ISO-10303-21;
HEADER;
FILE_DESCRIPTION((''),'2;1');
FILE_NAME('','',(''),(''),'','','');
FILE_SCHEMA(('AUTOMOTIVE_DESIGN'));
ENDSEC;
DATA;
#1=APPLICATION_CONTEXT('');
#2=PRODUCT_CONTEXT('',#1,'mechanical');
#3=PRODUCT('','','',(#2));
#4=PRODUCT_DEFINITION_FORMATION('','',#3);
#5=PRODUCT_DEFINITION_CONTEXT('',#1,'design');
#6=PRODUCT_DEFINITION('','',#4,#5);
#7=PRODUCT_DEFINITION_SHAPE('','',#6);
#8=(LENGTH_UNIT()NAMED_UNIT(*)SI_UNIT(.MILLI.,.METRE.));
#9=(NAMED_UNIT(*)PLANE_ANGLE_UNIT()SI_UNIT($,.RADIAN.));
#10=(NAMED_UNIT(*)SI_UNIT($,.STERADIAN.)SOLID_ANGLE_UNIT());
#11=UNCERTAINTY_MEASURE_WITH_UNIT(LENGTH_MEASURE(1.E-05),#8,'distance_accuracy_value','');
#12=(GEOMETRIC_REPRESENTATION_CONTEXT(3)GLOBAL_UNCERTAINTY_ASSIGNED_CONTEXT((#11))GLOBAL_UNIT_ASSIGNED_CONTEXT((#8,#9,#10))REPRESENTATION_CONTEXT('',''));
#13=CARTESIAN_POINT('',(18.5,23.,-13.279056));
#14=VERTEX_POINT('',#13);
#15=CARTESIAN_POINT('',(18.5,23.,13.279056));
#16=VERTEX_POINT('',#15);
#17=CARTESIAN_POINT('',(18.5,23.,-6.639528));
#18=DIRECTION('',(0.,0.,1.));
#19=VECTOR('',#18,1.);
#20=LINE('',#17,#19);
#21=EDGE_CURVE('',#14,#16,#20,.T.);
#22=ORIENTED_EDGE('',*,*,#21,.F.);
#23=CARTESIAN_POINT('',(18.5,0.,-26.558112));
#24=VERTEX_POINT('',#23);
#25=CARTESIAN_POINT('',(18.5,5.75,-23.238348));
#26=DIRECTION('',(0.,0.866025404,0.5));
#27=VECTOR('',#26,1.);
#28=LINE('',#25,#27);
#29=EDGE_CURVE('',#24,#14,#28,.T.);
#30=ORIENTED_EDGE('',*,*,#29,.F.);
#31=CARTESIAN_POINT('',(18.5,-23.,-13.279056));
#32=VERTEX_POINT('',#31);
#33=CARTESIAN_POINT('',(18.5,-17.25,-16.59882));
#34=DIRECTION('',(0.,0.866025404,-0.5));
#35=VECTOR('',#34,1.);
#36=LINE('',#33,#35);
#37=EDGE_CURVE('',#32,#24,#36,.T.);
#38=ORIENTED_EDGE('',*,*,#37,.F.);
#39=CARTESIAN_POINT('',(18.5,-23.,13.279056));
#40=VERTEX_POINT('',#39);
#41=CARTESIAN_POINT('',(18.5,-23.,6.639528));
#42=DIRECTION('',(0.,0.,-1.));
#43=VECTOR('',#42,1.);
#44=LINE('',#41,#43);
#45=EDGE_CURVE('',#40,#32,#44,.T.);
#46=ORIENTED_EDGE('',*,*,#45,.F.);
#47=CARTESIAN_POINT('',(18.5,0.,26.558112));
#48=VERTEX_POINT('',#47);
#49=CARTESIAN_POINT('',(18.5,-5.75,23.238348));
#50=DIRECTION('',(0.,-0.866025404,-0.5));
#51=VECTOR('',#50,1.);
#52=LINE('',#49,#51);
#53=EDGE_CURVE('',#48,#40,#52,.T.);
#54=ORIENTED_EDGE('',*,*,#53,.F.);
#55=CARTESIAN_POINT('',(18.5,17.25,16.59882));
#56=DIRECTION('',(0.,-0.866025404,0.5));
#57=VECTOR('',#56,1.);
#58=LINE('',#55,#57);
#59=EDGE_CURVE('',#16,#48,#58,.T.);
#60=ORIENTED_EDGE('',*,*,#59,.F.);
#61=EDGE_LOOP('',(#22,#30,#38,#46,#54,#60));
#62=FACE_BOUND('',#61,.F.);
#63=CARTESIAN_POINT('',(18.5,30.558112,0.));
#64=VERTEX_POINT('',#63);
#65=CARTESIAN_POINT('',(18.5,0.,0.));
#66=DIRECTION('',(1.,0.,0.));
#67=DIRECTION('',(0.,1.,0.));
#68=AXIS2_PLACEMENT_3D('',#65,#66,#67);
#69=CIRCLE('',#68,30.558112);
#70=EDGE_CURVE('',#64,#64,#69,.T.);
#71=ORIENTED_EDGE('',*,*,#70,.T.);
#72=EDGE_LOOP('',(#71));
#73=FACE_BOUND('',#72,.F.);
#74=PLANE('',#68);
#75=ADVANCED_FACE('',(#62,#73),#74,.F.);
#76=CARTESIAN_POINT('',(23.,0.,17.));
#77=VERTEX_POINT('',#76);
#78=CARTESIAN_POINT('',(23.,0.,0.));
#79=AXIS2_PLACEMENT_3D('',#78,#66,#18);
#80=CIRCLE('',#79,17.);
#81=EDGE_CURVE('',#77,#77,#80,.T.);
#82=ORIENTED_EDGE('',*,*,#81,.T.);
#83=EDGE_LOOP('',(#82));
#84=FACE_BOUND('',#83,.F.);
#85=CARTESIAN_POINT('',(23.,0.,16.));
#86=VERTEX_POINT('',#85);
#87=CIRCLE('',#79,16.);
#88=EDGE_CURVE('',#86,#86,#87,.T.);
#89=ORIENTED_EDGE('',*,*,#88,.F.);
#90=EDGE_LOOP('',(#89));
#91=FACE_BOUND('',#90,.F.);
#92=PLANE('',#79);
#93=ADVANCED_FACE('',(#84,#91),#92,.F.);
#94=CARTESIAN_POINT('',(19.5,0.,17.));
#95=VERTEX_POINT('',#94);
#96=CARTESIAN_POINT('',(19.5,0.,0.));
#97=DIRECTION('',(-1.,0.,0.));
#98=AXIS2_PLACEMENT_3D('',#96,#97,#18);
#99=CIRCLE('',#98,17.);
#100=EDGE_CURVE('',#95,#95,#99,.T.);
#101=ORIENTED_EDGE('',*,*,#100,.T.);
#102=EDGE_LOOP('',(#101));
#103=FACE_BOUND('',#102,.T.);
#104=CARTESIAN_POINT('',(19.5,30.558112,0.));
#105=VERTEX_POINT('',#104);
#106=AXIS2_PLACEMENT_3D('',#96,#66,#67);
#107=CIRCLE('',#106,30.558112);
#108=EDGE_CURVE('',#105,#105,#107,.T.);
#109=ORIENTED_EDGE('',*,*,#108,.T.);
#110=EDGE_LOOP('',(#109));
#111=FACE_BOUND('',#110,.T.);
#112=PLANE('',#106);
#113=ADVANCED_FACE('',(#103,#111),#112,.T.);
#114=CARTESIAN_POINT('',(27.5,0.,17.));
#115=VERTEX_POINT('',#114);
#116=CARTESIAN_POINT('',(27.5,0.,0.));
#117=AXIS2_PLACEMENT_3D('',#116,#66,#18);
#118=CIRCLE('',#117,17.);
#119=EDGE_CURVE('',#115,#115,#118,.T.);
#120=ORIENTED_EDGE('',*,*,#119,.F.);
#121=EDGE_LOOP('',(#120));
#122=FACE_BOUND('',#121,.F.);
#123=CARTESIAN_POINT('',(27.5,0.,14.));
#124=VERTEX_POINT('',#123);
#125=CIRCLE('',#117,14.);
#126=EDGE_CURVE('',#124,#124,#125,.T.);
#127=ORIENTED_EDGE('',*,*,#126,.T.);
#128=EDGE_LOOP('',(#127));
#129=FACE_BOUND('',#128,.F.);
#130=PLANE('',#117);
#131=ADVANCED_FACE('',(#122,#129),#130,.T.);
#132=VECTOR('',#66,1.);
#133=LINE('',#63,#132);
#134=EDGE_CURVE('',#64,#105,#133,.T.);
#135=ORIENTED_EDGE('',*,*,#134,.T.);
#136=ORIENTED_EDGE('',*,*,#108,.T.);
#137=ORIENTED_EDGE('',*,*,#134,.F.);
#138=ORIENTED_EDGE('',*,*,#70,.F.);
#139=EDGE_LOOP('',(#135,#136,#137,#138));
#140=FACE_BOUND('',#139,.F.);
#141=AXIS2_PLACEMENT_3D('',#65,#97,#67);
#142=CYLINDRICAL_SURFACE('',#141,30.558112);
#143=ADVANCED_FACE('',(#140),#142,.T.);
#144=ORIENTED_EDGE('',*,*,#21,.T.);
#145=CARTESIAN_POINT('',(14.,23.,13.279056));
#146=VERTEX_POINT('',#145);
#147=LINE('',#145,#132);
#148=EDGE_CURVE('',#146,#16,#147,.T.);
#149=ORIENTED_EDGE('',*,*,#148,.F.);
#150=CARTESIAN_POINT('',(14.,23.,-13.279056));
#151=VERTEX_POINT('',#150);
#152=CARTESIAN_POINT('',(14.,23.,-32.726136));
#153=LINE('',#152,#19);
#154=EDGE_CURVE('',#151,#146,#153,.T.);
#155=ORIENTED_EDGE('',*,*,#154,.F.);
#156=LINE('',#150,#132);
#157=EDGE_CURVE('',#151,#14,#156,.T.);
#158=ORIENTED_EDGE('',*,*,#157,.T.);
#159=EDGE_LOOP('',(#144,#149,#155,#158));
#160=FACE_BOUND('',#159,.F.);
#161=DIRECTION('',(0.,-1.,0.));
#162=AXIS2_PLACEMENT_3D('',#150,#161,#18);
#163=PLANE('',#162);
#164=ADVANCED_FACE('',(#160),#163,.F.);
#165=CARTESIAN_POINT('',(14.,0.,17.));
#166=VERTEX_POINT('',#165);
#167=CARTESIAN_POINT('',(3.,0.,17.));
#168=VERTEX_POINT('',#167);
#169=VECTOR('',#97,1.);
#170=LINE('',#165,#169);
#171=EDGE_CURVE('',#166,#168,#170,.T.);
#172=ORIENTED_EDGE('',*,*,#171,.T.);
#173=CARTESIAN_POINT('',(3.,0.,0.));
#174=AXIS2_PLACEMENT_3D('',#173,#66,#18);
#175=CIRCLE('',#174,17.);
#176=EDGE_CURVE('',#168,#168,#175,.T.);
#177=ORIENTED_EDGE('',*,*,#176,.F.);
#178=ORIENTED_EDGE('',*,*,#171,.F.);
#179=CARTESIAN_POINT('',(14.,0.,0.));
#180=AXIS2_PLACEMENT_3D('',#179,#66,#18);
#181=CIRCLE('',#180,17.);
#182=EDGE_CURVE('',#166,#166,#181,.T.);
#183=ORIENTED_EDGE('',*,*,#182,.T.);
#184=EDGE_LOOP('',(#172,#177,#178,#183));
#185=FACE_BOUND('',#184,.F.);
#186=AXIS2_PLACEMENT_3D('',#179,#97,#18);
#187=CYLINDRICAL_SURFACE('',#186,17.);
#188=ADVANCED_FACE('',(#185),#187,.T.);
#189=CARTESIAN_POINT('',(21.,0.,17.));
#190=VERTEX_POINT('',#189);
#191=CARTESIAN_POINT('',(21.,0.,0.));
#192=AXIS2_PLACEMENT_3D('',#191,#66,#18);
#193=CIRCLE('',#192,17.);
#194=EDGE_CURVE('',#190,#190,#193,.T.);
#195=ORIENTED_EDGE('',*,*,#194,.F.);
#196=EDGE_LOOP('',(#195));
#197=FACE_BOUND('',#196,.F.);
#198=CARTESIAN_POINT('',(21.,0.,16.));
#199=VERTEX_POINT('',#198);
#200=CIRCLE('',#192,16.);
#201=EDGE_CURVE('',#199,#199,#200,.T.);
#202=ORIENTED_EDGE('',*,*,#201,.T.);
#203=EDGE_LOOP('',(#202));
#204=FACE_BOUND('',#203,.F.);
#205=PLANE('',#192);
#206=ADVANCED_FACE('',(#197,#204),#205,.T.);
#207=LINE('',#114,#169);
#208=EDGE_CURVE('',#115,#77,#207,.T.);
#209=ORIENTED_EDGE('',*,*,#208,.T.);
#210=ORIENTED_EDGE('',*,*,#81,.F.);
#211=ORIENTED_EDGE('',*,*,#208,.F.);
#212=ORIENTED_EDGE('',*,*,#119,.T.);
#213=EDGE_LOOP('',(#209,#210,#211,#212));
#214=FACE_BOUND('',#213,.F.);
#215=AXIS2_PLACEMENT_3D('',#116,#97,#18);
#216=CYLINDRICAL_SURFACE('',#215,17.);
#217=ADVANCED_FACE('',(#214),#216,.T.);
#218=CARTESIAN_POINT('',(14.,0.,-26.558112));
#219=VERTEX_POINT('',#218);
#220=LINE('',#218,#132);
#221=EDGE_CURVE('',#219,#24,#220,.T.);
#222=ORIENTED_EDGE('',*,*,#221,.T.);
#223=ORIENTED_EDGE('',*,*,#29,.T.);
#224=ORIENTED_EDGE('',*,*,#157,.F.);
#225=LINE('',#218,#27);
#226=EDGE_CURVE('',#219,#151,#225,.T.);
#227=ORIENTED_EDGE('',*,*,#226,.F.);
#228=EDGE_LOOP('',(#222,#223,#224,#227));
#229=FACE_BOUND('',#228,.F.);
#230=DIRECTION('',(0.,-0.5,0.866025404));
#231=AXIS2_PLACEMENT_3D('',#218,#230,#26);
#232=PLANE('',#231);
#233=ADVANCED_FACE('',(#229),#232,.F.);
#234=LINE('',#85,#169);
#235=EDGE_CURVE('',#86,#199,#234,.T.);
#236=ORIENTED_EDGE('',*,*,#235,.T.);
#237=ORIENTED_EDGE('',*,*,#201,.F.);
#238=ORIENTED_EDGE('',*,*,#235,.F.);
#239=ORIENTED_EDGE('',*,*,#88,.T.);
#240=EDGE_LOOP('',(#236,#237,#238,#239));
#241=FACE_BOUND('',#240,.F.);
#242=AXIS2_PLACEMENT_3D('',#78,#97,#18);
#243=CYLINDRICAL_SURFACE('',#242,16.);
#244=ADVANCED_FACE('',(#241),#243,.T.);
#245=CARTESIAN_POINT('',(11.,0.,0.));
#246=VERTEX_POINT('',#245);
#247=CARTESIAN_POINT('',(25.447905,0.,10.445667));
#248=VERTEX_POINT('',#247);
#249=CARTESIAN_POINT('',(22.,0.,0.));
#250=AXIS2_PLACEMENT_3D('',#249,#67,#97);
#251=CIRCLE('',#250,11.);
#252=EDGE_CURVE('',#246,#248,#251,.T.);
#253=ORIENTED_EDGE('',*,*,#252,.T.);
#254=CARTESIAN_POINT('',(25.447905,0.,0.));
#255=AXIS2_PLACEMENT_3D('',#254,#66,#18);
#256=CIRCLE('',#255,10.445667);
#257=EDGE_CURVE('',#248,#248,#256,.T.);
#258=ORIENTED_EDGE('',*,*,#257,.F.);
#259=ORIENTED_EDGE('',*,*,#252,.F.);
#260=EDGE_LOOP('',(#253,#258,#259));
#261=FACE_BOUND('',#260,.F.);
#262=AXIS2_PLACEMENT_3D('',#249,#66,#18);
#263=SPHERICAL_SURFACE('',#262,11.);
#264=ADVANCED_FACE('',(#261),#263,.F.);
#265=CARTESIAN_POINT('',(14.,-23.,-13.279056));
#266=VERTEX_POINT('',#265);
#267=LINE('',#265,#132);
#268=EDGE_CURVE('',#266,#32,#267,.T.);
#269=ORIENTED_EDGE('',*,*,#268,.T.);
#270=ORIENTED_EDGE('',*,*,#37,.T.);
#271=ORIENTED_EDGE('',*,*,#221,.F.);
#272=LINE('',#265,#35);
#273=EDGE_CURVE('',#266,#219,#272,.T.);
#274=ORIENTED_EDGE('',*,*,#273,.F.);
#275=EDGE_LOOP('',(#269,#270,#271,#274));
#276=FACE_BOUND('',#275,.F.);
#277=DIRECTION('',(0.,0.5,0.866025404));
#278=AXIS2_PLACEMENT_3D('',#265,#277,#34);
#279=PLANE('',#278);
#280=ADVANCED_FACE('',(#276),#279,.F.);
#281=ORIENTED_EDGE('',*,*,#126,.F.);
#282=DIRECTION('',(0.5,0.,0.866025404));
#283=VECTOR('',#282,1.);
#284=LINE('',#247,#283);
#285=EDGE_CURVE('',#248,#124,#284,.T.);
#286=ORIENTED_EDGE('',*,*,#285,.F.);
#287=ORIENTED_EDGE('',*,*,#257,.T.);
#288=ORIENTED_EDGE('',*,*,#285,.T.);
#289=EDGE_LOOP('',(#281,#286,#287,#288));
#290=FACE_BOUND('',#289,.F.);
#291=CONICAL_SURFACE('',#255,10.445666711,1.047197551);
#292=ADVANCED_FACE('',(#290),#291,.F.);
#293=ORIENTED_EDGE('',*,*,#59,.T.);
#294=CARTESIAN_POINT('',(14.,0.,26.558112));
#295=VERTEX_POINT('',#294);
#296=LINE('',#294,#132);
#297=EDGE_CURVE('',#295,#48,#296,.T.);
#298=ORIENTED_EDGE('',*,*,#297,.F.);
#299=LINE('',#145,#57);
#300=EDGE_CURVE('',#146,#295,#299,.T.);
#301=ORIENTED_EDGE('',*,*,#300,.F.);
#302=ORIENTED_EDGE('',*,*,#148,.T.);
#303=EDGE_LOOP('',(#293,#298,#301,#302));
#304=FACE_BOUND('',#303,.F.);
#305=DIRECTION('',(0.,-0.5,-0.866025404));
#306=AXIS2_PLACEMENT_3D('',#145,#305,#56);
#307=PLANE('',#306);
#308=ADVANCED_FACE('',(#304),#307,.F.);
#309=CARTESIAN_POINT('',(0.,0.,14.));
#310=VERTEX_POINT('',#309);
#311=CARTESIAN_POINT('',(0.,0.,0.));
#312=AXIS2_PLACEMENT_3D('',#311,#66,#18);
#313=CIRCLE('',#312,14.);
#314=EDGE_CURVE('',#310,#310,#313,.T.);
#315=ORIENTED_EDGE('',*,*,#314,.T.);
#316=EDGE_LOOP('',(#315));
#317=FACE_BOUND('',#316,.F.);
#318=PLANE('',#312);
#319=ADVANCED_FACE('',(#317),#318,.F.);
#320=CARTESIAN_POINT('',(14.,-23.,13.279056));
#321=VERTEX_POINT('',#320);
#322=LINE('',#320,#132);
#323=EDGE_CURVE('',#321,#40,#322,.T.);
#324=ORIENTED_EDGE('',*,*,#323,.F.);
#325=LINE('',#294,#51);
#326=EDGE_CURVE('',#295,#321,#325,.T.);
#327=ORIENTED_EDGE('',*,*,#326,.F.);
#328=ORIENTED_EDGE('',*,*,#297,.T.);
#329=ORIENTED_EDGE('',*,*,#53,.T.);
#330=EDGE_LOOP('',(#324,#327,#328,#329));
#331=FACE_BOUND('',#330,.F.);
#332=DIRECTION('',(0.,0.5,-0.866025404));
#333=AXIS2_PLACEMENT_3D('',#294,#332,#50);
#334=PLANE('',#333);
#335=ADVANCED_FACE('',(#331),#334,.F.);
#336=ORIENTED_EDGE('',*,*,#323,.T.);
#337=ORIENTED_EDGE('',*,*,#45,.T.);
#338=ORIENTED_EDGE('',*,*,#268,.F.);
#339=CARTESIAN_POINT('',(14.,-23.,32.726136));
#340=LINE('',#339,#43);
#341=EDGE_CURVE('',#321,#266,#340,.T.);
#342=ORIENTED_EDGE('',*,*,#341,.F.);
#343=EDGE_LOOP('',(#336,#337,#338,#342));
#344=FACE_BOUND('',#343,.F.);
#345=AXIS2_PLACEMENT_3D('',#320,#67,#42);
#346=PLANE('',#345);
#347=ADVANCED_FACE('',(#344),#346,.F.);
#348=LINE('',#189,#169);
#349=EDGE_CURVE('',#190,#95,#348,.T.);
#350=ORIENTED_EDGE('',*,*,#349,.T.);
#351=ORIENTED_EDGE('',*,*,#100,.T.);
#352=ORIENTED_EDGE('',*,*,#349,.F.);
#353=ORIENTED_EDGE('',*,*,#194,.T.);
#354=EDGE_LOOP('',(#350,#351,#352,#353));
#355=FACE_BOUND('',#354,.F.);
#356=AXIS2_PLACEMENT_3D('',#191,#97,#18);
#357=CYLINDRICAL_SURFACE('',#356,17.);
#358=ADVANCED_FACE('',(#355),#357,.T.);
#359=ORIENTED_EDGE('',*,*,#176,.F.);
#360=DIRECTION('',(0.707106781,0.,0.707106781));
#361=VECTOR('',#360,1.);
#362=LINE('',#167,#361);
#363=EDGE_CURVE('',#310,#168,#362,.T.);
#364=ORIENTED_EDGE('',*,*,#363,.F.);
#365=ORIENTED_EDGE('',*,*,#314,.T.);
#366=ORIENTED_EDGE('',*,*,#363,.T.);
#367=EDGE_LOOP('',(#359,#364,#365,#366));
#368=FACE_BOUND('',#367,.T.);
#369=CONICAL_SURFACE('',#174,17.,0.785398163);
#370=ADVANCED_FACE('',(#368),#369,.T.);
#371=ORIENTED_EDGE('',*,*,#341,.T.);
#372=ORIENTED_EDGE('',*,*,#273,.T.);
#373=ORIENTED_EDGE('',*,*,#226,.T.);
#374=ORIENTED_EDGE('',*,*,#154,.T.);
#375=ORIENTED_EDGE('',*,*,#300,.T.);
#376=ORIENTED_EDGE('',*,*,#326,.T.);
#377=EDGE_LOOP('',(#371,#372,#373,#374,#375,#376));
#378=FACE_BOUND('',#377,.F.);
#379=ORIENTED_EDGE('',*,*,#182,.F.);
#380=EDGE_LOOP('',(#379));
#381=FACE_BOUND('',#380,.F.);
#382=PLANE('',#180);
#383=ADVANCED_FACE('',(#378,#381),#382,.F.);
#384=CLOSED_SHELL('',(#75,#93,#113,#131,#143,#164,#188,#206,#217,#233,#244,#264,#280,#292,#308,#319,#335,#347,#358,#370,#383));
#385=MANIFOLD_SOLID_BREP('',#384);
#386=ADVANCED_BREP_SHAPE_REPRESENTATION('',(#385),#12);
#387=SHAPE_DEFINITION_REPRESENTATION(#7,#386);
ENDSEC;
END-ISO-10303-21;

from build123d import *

# Parameters (mm, degrees)
F3_DEPTH = 25
F4_SIZE  = 3
F5_R     = 30.5581123827
F5_R_2   = 17
F6_DEPTH = 1


with BuildPart() as f1:
    # F0 (on Front) → F1 (revolve)
    with BuildSketch(Plane.XZ):
        with BuildLine():
            Line((0, 17), (0, 0))
            Line((0, 0), (11, 0))
            ThreePointArc((11, 0), (15.5551164444, 8.914228848), (25.4479047191, 10.4456667115))
            Line((25.4479047191, 10.4456667115), (27.5, 14))
            Line((27.5, 14), (27.5, 17))
            Line((27.5, 17), (23, 17))
            Line((23, 17), (23, 16))
            Line((23, 16), (21, 16))
            Line((21, 16), (21, 17))
            Line((21, 17), (18.5, 17))
            Line((18.5, 17), (18.5, 40))
            Line((18.5, 40), (14, 40))
            Line((14, 40), (14, 17))
            Line((14, 17), (0, 17))
        make_face()
    revolve(axis=Axis((11, 0, 0), (1, 0, 0)))

    # F2 (on face) → F3 (cut)
    with BuildSketch(Plane(origin=(14, 0, 0), x_dir=(0, -1, 0), z_dir=(-1, 0, 0))):
        with BuildLine():
            ThreePointArc((16.8416654415, -36.281652459), (20, -34.6410161514), (23, -32.7261363439))
            Line((23, -32.7261363439), (23, -13.2790561914))
            Line((23, -13.2790561914), (0, -26.5581123827))
            Line((0, -26.5581123827), (16.8416654415, -36.281652459))
        make_face()
        with BuildLine():
            Line((23, -13.2790561914), (23, -32.7261363439))
            ThreePointArc((23, -32.7261363439), (34.6410161514, -20), (39.8416654415, -3.5555161151))
            Line((39.8416654415, -3.5555161151), (23, -13.2790561914))
        make_face()
        with BuildLine():
            Line((23, 13.2790561914), (23, -13.2790561914))
            Line((23, -13.2790561914), (39.8416654415, -3.5555161151))
            ThreePointArc((39.8416654415, -3.5555161151), (39.9603967552, -1.7795199266), (40, 0))
            ThreePointArc((40, 0), (39.9603967552, 1.7795199266), (39.8416654415, 3.5555161151))
            Line((39.8416654415, 3.5555161151), (23, 13.2790561914))
        make_face()
        with BuildLine():
            Line((23, 32.7261363439), (23, 13.2790561914))
            Line((23, 13.2790561914), (39.8416654415, 3.5555161151))
            ThreePointArc((39.8416654415, 3.5555161151), (34.6410161514, 20), (23, 32.7261363439))
        make_face()
        with BuildLine():
            Line((0, 26.5581123827), (23, 13.2790561914))
            Line((23, 13.2790561914), (23, 32.7261363439))
            ThreePointArc((23, 32.7261363439), (20, 34.6410161514), (16.8416654415, 36.281652459))
            Line((16.8416654415, 36.281652459), (0, 26.5581123827))
        make_face()
        with BuildLine():
            Line((-16.8416654415, 36.281652459), (0, 26.5581123827))
            Line((0, 26.5581123827), (16.8416654415, 36.281652459))
            ThreePointArc((16.8416654415, 36.281652459), (0, 40), (-16.8416654415, 36.281652459))
        make_face()
        with BuildLine():
            Line((-23, 13.2790561914), (0, 26.5581123827))
            Line((0, 26.5581123827), (-16.8416654415, 36.281652459))
            ThreePointArc((-16.8416654415, 36.281652459), (-20, 34.6410161514), (-23, 32.7261363439))
            Line((-23, 32.7261363439), (-23, 13.2790561914))
        make_face()
        with BuildLine():
            Line((-39.8416654415, -3.5555161151), (-23, -13.2790561914))
            Line((-23, -13.2790561914), (-23, 13.2790561914))
            Line((-23, 13.2790561914), (-39.8416654415, 3.5555161151))
            ThreePointArc((-39.8416654415, 3.5555161151), (-40, 0), (-39.8416654415, -3.5555161151))
        make_face()
        with BuildLine():
            Line((-23, -32.7261363439), (-23, -13.2790561914))
            Line((-23, -13.2790561914), (-39.8416654415, -3.5555161151))
            ThreePointArc((-39.8416654415, -3.5555161151), (-34.6410161514, -20), (-23, -32.7261363439))
        make_face()
        with BuildLine():
            Line((-16.8416654415, -36.281652459), (0, -26.5581123827))
            Line((0, -26.5581123827), (-23, -13.2790561914))
            Line((-23, -13.2790561914), (-23, -32.7261363439))
            ThreePointArc((-23, -32.7261363439), (-20, -34.6410161514), (-16.8416654415, -36.281652459))
        make_face()
        with BuildLine():
            ThreePointArc((-16.8416654415, -36.281652459), (0, -40), (16.8416654415, -36.281652459))
            Line((16.8416654415, -36.281652459), (0, -26.5581123827))
            Line((0, -26.5581123827), (-16.8416654415, -36.281652459))
        make_face()
        with BuildLine():
            Line((-39.8416654415, 3.5555161151), (-23, 13.2790561914))
            Line((-23, 13.2790561914), (-23, 32.7261363439))
            ThreePointArc((-23, 32.7261363439), (-34.6410161514, 20), (-39.8416654415, 3.5555161151))
        make_face()
    extrude(amount=-F3_DEPTH, mode=Mode.SUBTRACT)

    # F4
    f4_edges = [f1.edges().sort_by_distance(p)[0] for p in [
        (0, 0, -17),
    ]]
    chamfer(f4_edges, length=F4_SIZE)

    # F5 (on face) → F6 (join)
    with BuildSketch(Plane.YZ.offset(18.5)):
        Circle(F5_R)
        Polygon((23, 13.2790561914), (23, -13.2790561914), (0, -26.5581123827), (-23, -13.2790561914), (-23, 13.2790561914), (0, 26.5581123827), align=None, mode=Mode.SUBTRACT)
        Polygon((0, -26.5581123827), (23, -13.2790561914), (23, 13.2790561914), (0, 26.5581123827), (-23, 13.2790561914), (-23, -13.2790561914), align=None)
        Circle(F5_R_2, mode=Mode.SUBTRACT)
    extrude(amount=F6_DEPTH)


solid = f1.part
